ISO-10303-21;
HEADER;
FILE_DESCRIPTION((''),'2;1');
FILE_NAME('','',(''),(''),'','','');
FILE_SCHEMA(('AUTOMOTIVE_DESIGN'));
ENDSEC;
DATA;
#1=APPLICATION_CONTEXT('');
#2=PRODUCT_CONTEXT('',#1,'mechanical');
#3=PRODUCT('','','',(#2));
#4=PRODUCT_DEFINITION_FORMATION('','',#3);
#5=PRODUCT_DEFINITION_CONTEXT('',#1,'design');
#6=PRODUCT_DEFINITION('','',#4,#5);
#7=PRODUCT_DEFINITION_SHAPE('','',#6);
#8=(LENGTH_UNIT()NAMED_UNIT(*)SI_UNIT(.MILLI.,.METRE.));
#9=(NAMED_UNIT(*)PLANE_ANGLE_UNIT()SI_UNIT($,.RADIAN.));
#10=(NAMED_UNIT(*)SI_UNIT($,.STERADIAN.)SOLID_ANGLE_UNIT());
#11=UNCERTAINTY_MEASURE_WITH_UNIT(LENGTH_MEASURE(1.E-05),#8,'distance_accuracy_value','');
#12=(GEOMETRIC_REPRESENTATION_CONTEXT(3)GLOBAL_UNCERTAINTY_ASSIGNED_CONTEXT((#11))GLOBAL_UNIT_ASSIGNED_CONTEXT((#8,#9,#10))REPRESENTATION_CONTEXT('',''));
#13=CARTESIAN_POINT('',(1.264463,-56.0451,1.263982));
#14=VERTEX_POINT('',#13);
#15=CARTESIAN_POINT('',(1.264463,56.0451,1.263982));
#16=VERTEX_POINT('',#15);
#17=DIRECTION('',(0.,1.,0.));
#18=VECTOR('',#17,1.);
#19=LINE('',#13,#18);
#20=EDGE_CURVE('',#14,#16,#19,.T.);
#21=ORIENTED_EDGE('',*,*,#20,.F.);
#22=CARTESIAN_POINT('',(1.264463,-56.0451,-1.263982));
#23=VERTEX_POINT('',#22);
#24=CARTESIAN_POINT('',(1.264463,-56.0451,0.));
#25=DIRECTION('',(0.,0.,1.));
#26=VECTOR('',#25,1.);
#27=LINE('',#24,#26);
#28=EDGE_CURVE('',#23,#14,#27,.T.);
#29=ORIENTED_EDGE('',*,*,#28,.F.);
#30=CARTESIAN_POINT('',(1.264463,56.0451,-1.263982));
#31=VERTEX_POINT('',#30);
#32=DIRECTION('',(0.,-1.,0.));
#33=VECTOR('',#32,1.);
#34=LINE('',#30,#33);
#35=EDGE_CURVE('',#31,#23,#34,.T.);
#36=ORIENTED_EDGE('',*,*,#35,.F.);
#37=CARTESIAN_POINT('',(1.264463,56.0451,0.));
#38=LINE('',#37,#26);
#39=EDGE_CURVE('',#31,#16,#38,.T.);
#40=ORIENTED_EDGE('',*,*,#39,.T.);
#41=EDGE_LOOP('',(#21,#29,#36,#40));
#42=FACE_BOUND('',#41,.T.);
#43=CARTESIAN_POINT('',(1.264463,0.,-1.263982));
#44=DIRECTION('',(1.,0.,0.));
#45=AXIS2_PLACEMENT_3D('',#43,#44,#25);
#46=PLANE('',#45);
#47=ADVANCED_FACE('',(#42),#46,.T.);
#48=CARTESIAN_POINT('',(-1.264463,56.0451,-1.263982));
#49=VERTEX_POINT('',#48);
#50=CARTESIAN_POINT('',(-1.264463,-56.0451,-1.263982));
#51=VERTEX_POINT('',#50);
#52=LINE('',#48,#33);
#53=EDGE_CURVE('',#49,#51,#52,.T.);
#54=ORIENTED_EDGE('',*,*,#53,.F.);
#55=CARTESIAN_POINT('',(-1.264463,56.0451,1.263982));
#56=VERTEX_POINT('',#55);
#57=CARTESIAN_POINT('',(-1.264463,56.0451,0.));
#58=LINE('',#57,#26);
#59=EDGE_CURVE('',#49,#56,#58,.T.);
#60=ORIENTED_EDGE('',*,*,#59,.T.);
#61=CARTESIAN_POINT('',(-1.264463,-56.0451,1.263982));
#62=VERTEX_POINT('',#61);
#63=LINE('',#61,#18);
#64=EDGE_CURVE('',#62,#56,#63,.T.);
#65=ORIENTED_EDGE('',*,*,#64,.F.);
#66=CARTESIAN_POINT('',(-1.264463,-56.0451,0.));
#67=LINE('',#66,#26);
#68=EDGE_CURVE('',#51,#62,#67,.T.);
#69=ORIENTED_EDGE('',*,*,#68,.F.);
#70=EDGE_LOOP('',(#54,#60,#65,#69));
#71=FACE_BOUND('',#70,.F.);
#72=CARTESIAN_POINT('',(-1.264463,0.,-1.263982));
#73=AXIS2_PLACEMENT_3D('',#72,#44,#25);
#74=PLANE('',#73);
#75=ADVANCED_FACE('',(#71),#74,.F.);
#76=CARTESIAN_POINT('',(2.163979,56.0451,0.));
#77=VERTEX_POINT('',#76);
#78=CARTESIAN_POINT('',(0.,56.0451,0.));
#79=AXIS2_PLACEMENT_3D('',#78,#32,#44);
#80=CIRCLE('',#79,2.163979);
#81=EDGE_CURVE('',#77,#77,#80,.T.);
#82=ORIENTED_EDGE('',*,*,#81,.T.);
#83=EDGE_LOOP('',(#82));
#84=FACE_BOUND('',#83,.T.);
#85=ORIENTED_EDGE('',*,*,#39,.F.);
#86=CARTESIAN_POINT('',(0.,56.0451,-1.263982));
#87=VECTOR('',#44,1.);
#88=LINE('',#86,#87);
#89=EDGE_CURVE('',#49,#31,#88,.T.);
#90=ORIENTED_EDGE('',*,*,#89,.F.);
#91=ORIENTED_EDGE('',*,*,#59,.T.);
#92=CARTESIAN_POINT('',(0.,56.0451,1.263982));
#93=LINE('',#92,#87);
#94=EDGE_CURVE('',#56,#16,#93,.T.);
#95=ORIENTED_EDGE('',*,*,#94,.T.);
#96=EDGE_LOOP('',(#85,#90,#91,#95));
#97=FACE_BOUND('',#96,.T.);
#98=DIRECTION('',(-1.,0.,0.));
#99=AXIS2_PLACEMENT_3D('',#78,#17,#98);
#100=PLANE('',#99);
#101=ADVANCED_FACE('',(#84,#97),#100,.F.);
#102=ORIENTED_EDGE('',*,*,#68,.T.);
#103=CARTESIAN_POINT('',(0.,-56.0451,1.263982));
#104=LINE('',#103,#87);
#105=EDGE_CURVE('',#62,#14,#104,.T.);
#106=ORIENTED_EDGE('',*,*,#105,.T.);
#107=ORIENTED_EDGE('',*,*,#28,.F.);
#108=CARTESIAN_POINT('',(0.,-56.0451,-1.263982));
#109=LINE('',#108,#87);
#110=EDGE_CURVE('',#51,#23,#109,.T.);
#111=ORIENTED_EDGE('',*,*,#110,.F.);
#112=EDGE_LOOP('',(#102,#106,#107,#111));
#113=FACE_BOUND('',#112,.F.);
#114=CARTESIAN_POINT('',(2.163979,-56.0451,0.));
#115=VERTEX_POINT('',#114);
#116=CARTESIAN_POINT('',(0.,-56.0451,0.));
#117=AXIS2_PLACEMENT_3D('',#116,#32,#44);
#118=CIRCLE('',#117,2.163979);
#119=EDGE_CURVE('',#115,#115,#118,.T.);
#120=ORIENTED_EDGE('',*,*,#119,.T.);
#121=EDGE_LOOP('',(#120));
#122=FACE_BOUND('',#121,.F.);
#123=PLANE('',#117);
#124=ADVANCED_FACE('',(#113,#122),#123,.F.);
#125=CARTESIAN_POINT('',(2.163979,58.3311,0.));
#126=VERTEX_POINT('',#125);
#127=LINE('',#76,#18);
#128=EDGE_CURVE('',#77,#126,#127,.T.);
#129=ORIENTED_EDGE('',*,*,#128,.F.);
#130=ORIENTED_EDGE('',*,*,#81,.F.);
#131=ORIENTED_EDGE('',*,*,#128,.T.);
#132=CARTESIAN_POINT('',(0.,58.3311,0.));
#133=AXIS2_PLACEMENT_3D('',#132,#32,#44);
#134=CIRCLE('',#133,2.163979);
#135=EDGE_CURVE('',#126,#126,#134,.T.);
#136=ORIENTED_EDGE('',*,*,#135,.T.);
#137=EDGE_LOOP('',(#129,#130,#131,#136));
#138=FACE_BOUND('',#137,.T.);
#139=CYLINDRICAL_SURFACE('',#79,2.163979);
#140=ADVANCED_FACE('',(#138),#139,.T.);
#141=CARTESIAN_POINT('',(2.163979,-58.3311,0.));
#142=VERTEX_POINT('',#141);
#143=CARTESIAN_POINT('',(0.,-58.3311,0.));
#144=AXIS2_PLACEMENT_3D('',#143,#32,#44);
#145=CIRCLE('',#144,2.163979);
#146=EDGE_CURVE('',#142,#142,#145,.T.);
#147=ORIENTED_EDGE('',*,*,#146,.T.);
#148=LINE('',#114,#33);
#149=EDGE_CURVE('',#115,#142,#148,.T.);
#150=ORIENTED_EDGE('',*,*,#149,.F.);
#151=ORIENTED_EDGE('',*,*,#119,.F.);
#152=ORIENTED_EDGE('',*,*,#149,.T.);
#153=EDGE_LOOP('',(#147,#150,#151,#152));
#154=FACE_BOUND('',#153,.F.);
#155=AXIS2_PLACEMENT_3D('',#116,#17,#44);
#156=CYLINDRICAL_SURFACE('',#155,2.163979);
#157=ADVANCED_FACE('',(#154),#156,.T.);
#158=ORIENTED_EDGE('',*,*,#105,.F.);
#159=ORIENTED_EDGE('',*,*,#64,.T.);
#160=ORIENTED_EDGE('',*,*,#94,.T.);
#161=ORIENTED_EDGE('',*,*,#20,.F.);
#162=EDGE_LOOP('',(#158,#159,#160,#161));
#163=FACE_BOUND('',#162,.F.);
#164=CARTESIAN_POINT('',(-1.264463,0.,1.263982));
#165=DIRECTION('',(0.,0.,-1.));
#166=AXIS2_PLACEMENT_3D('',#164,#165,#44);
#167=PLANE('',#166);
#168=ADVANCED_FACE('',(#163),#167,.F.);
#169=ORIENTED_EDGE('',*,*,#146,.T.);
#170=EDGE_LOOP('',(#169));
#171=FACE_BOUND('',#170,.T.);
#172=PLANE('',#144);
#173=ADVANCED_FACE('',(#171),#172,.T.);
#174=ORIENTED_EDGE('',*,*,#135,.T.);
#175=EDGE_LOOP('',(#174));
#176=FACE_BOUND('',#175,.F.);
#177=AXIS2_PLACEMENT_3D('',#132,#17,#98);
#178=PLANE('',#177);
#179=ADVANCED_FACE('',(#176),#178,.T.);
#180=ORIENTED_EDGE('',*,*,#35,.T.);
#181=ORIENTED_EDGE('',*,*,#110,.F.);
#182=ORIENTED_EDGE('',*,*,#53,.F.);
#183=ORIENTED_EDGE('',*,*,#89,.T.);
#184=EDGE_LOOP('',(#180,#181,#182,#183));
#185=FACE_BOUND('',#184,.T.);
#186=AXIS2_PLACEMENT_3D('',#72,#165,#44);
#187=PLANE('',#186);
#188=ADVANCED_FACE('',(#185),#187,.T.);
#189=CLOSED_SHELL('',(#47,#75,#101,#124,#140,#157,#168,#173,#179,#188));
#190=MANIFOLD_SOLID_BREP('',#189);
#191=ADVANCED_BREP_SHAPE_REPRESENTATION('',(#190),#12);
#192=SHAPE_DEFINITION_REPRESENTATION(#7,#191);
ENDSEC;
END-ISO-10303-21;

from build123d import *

# Parameters (mm, degrees)
F0_W          = 2.528925892
F0_H          = 2.5279636029
F1_DEPTH      = 56.0451
F1_DEPTH_BACK = 56.0451
F2_R          = 2.1639792623
F3_DEPTH      = 2.286


# Not quite as in the source:
# - a pattern or mirror of a feature is missing from the dataset's text; its kind, count and spacing are read off the source's solid


with BuildPart() as f1:
    # F0 (on Front) → F1 (new body, two sides)
    with BuildSketch(Plane.XZ) as f1_sk:
        Rectangle(F0_W, F0_H)
    extrude(amount=F1_DEPTH)
    extrude(f1_sk.sketch, amount=-F1_DEPTH_BACK)

    # F2 (on face) → F3 (join)
    with BuildSketch(Plane.XZ.offset(56.0451)):
        Circle(F2_R)
    f3 = extrude(amount=F3_DEPTH)

    # F3_copies: F3 across plane
    add(f3.mirror(Plane.ZX))


solid = f1.part
